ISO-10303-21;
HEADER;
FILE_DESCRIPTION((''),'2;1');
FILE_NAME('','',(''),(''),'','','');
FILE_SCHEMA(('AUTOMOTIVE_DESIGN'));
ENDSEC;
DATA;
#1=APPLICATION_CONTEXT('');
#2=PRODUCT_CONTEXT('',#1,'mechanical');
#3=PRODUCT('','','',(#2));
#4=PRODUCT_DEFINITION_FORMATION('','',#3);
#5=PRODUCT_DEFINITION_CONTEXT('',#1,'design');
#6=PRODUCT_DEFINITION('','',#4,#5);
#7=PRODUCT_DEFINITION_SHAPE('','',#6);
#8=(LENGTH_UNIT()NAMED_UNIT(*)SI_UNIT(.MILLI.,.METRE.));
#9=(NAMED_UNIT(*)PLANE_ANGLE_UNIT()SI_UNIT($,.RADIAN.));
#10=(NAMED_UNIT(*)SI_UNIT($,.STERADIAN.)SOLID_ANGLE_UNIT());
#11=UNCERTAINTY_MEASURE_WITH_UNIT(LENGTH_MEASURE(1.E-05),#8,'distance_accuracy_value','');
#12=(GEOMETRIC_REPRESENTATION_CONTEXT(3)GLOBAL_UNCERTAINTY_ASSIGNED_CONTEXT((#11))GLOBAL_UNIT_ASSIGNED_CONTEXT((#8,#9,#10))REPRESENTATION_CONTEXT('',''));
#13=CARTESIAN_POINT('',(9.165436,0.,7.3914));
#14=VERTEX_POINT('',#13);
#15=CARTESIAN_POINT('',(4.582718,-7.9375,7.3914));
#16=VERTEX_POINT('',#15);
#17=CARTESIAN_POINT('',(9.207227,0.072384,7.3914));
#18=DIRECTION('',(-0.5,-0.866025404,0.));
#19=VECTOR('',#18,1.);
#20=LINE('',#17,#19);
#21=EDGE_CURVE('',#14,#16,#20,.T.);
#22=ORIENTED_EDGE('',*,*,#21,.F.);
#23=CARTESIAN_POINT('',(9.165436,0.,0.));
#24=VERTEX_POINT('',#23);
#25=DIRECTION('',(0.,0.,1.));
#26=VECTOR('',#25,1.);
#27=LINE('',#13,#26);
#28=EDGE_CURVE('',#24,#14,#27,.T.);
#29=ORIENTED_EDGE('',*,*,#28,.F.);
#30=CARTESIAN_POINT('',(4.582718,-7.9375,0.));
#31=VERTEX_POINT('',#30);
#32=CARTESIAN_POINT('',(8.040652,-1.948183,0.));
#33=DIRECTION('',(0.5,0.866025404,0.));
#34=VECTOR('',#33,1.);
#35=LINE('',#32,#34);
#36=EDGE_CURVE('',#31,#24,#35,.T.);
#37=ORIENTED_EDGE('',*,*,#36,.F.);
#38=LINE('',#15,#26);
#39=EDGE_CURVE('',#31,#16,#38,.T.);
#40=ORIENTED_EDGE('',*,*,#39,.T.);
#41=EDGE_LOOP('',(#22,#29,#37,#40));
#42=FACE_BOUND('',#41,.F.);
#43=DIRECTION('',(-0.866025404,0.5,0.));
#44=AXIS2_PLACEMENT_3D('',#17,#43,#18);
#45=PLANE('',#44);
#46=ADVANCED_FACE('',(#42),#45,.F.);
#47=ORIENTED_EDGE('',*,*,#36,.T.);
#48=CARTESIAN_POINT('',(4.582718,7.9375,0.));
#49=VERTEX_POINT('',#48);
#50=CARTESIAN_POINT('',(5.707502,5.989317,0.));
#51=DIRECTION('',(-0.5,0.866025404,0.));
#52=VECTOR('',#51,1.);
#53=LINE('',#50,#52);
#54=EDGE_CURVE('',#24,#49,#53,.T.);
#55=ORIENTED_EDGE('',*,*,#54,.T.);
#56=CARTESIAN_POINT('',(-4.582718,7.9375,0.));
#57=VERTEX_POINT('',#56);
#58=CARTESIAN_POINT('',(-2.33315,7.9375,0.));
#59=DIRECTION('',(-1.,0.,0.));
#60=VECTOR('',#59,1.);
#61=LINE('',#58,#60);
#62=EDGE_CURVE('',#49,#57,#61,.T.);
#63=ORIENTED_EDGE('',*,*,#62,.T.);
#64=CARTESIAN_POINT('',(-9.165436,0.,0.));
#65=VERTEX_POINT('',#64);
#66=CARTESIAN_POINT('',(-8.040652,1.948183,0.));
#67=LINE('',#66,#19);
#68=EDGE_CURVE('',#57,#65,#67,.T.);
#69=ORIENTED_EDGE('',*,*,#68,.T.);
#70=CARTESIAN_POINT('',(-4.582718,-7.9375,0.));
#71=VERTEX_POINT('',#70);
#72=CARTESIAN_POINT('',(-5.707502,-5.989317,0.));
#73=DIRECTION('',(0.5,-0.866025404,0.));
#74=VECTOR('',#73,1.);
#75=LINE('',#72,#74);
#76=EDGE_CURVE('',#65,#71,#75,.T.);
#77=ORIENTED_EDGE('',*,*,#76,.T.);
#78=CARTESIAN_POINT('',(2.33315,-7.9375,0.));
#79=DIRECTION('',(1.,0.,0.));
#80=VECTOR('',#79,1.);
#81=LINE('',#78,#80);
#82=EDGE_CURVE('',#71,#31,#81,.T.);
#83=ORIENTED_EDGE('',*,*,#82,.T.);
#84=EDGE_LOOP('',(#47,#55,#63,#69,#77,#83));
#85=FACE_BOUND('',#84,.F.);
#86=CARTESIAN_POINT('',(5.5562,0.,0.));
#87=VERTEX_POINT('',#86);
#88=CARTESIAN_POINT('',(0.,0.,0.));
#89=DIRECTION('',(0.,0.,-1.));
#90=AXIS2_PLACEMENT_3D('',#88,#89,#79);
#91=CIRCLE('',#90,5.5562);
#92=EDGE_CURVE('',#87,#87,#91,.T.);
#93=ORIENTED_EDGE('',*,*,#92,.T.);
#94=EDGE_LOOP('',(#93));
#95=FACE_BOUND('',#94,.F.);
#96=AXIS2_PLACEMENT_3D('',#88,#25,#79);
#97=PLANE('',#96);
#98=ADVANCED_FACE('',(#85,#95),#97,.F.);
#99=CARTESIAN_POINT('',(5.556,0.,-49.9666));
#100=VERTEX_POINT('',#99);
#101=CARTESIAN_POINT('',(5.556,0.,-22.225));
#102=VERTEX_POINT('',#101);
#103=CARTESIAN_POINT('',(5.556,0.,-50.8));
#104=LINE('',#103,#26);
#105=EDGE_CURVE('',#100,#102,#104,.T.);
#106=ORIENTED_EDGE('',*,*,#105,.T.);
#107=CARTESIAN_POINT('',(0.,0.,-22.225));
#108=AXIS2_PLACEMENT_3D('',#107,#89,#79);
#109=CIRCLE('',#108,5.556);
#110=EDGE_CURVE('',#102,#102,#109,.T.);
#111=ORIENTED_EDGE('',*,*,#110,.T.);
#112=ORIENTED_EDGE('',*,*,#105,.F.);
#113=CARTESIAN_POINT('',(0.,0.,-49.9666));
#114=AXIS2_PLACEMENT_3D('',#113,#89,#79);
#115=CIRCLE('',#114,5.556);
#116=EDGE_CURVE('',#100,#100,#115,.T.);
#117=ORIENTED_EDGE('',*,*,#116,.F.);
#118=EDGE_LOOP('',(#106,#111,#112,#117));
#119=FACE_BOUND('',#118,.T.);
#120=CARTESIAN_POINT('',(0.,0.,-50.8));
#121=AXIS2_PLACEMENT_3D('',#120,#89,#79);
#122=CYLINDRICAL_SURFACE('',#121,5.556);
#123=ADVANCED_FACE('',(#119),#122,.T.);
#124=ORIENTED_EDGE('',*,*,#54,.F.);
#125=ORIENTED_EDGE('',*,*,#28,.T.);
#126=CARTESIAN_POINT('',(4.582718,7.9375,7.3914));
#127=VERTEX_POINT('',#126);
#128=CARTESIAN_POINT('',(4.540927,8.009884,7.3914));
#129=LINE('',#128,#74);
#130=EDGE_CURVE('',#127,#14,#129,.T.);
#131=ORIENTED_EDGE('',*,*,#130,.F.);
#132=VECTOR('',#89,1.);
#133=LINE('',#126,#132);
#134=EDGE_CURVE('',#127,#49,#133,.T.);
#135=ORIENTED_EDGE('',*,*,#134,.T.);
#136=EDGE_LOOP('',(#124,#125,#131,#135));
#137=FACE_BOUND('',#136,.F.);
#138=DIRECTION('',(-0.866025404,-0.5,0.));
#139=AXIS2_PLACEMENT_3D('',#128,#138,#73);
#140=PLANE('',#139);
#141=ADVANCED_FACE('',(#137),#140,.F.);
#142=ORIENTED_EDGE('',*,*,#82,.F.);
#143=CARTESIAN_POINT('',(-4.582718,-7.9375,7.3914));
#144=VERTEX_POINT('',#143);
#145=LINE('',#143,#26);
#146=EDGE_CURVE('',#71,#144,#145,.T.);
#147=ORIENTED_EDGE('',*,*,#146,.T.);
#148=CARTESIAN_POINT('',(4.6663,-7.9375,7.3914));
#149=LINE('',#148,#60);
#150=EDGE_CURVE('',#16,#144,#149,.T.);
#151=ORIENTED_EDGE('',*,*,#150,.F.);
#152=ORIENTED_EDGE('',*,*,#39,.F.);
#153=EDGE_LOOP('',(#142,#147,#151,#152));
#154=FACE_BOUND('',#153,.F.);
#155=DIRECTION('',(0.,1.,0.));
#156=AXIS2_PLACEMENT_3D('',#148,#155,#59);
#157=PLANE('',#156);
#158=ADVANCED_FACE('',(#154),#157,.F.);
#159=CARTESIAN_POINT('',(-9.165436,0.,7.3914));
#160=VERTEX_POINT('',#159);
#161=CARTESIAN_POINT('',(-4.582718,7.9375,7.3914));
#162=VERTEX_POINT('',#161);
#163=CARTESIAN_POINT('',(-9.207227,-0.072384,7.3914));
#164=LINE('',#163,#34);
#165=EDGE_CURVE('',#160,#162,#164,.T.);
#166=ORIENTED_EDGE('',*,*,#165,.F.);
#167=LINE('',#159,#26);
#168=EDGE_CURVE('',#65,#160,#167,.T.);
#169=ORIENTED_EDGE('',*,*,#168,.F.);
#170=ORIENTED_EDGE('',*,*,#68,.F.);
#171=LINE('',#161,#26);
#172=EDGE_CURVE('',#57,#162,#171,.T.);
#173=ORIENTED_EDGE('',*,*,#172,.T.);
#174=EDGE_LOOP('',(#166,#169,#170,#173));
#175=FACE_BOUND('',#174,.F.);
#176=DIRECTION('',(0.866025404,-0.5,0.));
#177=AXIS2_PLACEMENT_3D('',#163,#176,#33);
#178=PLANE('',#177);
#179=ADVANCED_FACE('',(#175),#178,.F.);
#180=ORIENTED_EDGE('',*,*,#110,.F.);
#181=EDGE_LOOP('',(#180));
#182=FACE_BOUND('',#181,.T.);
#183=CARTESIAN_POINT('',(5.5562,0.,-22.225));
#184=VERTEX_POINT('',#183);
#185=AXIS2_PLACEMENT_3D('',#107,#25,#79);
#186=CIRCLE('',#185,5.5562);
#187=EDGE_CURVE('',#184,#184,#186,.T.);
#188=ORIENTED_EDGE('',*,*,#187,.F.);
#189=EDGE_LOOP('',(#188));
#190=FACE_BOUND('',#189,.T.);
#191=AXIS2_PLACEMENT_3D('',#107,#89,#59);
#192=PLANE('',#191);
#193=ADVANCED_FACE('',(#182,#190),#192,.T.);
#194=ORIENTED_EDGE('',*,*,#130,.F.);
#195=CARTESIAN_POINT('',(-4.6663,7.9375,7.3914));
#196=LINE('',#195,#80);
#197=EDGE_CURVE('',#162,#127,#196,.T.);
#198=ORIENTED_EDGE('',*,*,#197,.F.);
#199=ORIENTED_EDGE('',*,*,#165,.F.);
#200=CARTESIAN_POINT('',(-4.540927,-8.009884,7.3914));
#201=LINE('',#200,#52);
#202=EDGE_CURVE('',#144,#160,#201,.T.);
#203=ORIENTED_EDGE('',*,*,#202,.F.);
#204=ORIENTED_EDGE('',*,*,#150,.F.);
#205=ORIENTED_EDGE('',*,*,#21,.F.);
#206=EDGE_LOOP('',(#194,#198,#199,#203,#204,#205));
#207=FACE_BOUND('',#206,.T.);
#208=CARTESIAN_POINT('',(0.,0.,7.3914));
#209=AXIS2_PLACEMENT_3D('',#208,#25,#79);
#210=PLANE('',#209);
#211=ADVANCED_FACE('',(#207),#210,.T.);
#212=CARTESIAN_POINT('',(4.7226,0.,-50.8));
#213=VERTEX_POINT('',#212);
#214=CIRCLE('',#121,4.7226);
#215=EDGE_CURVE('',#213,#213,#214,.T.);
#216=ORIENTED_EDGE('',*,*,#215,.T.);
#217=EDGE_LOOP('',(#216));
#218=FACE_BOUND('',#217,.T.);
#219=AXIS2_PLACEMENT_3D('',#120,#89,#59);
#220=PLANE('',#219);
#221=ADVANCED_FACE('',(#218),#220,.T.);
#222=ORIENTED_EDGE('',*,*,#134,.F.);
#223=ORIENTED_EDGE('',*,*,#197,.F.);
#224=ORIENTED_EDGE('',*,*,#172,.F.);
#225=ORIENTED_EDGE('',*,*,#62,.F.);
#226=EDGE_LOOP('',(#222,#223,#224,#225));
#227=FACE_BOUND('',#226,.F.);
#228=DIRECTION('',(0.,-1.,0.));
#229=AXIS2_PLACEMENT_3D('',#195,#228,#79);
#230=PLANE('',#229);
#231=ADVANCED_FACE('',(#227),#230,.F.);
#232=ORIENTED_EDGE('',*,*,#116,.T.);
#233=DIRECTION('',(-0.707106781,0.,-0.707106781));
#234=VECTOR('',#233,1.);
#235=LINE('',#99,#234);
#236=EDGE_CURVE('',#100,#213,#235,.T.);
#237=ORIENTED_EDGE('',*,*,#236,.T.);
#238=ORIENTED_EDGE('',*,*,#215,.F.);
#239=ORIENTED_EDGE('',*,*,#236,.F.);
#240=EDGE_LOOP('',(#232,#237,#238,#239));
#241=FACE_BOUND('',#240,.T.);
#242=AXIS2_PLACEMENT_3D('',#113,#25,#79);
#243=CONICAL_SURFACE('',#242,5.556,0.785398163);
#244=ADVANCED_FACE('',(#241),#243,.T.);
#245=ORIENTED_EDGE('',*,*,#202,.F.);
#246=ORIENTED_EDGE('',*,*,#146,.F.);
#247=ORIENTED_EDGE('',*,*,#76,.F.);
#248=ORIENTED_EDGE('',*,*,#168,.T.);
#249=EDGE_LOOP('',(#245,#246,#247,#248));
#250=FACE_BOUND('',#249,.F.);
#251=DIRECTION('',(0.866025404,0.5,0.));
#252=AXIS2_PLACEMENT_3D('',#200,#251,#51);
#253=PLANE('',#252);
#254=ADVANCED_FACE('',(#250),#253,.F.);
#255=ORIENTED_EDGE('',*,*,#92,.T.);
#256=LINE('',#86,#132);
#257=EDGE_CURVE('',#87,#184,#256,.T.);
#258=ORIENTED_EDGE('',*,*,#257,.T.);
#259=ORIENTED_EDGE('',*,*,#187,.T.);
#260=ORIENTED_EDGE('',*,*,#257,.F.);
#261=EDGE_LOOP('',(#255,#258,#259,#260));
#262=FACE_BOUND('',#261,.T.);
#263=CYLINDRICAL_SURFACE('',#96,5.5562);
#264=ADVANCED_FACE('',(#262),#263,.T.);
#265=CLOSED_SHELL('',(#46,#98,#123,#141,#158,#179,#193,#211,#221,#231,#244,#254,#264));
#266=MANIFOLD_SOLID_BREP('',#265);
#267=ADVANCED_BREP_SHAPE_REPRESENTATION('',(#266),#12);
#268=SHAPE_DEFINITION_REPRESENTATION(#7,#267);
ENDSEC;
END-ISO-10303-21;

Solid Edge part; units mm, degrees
sketch "Sketch1" plane through (0, 0, 0) normal (0, 0, 1) x (1, 0, 0)
  circle A0 centre (0, 0) radius 9.2075
  dimension "D1" = 18.415
extrude "Protrusion1" add sketch "Sketch1" along normal blind 7.3914
sketch "Sketch2" plane through (0, 0, 0) normal (0, 0, -1) x (1, 0, 0)
  circle A0 centre (0, 0) radius 5.5562
extrude "Protrusion2" add sketch "Sketch2" along normal blind 50.8
sketch "Sketch3" plane through (0, 0, -50.8) normal (0, 0, -1) x (1, 0, 0)
  circle A0 centre (0, 0) radius 5.556
extrude "Cutout1" cut sketch "Sketch3" against normal blind 28.575 flip side to cut
chamfer "Chamfer_1" distance 0.8334 angle 45 1 edges at (-5.556, 0, -50.8)
sketch "Sketch4" plane through (0, 0, 7.3914) normal (0, 0, 1) x (1, 0, 0)
  line L0 (-4.6663, 7.9375) -> (4.6663, 7.9375)
  dimension "D1" = 15.875
extrude "Cutout2" cut sketch "Sketch4" against normal up to next material side at (0, 7.9875, 7.3914)
pattern_circular "Pattern1" count 6 over 360 about axis through (0, 0, 7.3914) along (0, 0, 1) of "Cutout2"
properties part number "24100024"
